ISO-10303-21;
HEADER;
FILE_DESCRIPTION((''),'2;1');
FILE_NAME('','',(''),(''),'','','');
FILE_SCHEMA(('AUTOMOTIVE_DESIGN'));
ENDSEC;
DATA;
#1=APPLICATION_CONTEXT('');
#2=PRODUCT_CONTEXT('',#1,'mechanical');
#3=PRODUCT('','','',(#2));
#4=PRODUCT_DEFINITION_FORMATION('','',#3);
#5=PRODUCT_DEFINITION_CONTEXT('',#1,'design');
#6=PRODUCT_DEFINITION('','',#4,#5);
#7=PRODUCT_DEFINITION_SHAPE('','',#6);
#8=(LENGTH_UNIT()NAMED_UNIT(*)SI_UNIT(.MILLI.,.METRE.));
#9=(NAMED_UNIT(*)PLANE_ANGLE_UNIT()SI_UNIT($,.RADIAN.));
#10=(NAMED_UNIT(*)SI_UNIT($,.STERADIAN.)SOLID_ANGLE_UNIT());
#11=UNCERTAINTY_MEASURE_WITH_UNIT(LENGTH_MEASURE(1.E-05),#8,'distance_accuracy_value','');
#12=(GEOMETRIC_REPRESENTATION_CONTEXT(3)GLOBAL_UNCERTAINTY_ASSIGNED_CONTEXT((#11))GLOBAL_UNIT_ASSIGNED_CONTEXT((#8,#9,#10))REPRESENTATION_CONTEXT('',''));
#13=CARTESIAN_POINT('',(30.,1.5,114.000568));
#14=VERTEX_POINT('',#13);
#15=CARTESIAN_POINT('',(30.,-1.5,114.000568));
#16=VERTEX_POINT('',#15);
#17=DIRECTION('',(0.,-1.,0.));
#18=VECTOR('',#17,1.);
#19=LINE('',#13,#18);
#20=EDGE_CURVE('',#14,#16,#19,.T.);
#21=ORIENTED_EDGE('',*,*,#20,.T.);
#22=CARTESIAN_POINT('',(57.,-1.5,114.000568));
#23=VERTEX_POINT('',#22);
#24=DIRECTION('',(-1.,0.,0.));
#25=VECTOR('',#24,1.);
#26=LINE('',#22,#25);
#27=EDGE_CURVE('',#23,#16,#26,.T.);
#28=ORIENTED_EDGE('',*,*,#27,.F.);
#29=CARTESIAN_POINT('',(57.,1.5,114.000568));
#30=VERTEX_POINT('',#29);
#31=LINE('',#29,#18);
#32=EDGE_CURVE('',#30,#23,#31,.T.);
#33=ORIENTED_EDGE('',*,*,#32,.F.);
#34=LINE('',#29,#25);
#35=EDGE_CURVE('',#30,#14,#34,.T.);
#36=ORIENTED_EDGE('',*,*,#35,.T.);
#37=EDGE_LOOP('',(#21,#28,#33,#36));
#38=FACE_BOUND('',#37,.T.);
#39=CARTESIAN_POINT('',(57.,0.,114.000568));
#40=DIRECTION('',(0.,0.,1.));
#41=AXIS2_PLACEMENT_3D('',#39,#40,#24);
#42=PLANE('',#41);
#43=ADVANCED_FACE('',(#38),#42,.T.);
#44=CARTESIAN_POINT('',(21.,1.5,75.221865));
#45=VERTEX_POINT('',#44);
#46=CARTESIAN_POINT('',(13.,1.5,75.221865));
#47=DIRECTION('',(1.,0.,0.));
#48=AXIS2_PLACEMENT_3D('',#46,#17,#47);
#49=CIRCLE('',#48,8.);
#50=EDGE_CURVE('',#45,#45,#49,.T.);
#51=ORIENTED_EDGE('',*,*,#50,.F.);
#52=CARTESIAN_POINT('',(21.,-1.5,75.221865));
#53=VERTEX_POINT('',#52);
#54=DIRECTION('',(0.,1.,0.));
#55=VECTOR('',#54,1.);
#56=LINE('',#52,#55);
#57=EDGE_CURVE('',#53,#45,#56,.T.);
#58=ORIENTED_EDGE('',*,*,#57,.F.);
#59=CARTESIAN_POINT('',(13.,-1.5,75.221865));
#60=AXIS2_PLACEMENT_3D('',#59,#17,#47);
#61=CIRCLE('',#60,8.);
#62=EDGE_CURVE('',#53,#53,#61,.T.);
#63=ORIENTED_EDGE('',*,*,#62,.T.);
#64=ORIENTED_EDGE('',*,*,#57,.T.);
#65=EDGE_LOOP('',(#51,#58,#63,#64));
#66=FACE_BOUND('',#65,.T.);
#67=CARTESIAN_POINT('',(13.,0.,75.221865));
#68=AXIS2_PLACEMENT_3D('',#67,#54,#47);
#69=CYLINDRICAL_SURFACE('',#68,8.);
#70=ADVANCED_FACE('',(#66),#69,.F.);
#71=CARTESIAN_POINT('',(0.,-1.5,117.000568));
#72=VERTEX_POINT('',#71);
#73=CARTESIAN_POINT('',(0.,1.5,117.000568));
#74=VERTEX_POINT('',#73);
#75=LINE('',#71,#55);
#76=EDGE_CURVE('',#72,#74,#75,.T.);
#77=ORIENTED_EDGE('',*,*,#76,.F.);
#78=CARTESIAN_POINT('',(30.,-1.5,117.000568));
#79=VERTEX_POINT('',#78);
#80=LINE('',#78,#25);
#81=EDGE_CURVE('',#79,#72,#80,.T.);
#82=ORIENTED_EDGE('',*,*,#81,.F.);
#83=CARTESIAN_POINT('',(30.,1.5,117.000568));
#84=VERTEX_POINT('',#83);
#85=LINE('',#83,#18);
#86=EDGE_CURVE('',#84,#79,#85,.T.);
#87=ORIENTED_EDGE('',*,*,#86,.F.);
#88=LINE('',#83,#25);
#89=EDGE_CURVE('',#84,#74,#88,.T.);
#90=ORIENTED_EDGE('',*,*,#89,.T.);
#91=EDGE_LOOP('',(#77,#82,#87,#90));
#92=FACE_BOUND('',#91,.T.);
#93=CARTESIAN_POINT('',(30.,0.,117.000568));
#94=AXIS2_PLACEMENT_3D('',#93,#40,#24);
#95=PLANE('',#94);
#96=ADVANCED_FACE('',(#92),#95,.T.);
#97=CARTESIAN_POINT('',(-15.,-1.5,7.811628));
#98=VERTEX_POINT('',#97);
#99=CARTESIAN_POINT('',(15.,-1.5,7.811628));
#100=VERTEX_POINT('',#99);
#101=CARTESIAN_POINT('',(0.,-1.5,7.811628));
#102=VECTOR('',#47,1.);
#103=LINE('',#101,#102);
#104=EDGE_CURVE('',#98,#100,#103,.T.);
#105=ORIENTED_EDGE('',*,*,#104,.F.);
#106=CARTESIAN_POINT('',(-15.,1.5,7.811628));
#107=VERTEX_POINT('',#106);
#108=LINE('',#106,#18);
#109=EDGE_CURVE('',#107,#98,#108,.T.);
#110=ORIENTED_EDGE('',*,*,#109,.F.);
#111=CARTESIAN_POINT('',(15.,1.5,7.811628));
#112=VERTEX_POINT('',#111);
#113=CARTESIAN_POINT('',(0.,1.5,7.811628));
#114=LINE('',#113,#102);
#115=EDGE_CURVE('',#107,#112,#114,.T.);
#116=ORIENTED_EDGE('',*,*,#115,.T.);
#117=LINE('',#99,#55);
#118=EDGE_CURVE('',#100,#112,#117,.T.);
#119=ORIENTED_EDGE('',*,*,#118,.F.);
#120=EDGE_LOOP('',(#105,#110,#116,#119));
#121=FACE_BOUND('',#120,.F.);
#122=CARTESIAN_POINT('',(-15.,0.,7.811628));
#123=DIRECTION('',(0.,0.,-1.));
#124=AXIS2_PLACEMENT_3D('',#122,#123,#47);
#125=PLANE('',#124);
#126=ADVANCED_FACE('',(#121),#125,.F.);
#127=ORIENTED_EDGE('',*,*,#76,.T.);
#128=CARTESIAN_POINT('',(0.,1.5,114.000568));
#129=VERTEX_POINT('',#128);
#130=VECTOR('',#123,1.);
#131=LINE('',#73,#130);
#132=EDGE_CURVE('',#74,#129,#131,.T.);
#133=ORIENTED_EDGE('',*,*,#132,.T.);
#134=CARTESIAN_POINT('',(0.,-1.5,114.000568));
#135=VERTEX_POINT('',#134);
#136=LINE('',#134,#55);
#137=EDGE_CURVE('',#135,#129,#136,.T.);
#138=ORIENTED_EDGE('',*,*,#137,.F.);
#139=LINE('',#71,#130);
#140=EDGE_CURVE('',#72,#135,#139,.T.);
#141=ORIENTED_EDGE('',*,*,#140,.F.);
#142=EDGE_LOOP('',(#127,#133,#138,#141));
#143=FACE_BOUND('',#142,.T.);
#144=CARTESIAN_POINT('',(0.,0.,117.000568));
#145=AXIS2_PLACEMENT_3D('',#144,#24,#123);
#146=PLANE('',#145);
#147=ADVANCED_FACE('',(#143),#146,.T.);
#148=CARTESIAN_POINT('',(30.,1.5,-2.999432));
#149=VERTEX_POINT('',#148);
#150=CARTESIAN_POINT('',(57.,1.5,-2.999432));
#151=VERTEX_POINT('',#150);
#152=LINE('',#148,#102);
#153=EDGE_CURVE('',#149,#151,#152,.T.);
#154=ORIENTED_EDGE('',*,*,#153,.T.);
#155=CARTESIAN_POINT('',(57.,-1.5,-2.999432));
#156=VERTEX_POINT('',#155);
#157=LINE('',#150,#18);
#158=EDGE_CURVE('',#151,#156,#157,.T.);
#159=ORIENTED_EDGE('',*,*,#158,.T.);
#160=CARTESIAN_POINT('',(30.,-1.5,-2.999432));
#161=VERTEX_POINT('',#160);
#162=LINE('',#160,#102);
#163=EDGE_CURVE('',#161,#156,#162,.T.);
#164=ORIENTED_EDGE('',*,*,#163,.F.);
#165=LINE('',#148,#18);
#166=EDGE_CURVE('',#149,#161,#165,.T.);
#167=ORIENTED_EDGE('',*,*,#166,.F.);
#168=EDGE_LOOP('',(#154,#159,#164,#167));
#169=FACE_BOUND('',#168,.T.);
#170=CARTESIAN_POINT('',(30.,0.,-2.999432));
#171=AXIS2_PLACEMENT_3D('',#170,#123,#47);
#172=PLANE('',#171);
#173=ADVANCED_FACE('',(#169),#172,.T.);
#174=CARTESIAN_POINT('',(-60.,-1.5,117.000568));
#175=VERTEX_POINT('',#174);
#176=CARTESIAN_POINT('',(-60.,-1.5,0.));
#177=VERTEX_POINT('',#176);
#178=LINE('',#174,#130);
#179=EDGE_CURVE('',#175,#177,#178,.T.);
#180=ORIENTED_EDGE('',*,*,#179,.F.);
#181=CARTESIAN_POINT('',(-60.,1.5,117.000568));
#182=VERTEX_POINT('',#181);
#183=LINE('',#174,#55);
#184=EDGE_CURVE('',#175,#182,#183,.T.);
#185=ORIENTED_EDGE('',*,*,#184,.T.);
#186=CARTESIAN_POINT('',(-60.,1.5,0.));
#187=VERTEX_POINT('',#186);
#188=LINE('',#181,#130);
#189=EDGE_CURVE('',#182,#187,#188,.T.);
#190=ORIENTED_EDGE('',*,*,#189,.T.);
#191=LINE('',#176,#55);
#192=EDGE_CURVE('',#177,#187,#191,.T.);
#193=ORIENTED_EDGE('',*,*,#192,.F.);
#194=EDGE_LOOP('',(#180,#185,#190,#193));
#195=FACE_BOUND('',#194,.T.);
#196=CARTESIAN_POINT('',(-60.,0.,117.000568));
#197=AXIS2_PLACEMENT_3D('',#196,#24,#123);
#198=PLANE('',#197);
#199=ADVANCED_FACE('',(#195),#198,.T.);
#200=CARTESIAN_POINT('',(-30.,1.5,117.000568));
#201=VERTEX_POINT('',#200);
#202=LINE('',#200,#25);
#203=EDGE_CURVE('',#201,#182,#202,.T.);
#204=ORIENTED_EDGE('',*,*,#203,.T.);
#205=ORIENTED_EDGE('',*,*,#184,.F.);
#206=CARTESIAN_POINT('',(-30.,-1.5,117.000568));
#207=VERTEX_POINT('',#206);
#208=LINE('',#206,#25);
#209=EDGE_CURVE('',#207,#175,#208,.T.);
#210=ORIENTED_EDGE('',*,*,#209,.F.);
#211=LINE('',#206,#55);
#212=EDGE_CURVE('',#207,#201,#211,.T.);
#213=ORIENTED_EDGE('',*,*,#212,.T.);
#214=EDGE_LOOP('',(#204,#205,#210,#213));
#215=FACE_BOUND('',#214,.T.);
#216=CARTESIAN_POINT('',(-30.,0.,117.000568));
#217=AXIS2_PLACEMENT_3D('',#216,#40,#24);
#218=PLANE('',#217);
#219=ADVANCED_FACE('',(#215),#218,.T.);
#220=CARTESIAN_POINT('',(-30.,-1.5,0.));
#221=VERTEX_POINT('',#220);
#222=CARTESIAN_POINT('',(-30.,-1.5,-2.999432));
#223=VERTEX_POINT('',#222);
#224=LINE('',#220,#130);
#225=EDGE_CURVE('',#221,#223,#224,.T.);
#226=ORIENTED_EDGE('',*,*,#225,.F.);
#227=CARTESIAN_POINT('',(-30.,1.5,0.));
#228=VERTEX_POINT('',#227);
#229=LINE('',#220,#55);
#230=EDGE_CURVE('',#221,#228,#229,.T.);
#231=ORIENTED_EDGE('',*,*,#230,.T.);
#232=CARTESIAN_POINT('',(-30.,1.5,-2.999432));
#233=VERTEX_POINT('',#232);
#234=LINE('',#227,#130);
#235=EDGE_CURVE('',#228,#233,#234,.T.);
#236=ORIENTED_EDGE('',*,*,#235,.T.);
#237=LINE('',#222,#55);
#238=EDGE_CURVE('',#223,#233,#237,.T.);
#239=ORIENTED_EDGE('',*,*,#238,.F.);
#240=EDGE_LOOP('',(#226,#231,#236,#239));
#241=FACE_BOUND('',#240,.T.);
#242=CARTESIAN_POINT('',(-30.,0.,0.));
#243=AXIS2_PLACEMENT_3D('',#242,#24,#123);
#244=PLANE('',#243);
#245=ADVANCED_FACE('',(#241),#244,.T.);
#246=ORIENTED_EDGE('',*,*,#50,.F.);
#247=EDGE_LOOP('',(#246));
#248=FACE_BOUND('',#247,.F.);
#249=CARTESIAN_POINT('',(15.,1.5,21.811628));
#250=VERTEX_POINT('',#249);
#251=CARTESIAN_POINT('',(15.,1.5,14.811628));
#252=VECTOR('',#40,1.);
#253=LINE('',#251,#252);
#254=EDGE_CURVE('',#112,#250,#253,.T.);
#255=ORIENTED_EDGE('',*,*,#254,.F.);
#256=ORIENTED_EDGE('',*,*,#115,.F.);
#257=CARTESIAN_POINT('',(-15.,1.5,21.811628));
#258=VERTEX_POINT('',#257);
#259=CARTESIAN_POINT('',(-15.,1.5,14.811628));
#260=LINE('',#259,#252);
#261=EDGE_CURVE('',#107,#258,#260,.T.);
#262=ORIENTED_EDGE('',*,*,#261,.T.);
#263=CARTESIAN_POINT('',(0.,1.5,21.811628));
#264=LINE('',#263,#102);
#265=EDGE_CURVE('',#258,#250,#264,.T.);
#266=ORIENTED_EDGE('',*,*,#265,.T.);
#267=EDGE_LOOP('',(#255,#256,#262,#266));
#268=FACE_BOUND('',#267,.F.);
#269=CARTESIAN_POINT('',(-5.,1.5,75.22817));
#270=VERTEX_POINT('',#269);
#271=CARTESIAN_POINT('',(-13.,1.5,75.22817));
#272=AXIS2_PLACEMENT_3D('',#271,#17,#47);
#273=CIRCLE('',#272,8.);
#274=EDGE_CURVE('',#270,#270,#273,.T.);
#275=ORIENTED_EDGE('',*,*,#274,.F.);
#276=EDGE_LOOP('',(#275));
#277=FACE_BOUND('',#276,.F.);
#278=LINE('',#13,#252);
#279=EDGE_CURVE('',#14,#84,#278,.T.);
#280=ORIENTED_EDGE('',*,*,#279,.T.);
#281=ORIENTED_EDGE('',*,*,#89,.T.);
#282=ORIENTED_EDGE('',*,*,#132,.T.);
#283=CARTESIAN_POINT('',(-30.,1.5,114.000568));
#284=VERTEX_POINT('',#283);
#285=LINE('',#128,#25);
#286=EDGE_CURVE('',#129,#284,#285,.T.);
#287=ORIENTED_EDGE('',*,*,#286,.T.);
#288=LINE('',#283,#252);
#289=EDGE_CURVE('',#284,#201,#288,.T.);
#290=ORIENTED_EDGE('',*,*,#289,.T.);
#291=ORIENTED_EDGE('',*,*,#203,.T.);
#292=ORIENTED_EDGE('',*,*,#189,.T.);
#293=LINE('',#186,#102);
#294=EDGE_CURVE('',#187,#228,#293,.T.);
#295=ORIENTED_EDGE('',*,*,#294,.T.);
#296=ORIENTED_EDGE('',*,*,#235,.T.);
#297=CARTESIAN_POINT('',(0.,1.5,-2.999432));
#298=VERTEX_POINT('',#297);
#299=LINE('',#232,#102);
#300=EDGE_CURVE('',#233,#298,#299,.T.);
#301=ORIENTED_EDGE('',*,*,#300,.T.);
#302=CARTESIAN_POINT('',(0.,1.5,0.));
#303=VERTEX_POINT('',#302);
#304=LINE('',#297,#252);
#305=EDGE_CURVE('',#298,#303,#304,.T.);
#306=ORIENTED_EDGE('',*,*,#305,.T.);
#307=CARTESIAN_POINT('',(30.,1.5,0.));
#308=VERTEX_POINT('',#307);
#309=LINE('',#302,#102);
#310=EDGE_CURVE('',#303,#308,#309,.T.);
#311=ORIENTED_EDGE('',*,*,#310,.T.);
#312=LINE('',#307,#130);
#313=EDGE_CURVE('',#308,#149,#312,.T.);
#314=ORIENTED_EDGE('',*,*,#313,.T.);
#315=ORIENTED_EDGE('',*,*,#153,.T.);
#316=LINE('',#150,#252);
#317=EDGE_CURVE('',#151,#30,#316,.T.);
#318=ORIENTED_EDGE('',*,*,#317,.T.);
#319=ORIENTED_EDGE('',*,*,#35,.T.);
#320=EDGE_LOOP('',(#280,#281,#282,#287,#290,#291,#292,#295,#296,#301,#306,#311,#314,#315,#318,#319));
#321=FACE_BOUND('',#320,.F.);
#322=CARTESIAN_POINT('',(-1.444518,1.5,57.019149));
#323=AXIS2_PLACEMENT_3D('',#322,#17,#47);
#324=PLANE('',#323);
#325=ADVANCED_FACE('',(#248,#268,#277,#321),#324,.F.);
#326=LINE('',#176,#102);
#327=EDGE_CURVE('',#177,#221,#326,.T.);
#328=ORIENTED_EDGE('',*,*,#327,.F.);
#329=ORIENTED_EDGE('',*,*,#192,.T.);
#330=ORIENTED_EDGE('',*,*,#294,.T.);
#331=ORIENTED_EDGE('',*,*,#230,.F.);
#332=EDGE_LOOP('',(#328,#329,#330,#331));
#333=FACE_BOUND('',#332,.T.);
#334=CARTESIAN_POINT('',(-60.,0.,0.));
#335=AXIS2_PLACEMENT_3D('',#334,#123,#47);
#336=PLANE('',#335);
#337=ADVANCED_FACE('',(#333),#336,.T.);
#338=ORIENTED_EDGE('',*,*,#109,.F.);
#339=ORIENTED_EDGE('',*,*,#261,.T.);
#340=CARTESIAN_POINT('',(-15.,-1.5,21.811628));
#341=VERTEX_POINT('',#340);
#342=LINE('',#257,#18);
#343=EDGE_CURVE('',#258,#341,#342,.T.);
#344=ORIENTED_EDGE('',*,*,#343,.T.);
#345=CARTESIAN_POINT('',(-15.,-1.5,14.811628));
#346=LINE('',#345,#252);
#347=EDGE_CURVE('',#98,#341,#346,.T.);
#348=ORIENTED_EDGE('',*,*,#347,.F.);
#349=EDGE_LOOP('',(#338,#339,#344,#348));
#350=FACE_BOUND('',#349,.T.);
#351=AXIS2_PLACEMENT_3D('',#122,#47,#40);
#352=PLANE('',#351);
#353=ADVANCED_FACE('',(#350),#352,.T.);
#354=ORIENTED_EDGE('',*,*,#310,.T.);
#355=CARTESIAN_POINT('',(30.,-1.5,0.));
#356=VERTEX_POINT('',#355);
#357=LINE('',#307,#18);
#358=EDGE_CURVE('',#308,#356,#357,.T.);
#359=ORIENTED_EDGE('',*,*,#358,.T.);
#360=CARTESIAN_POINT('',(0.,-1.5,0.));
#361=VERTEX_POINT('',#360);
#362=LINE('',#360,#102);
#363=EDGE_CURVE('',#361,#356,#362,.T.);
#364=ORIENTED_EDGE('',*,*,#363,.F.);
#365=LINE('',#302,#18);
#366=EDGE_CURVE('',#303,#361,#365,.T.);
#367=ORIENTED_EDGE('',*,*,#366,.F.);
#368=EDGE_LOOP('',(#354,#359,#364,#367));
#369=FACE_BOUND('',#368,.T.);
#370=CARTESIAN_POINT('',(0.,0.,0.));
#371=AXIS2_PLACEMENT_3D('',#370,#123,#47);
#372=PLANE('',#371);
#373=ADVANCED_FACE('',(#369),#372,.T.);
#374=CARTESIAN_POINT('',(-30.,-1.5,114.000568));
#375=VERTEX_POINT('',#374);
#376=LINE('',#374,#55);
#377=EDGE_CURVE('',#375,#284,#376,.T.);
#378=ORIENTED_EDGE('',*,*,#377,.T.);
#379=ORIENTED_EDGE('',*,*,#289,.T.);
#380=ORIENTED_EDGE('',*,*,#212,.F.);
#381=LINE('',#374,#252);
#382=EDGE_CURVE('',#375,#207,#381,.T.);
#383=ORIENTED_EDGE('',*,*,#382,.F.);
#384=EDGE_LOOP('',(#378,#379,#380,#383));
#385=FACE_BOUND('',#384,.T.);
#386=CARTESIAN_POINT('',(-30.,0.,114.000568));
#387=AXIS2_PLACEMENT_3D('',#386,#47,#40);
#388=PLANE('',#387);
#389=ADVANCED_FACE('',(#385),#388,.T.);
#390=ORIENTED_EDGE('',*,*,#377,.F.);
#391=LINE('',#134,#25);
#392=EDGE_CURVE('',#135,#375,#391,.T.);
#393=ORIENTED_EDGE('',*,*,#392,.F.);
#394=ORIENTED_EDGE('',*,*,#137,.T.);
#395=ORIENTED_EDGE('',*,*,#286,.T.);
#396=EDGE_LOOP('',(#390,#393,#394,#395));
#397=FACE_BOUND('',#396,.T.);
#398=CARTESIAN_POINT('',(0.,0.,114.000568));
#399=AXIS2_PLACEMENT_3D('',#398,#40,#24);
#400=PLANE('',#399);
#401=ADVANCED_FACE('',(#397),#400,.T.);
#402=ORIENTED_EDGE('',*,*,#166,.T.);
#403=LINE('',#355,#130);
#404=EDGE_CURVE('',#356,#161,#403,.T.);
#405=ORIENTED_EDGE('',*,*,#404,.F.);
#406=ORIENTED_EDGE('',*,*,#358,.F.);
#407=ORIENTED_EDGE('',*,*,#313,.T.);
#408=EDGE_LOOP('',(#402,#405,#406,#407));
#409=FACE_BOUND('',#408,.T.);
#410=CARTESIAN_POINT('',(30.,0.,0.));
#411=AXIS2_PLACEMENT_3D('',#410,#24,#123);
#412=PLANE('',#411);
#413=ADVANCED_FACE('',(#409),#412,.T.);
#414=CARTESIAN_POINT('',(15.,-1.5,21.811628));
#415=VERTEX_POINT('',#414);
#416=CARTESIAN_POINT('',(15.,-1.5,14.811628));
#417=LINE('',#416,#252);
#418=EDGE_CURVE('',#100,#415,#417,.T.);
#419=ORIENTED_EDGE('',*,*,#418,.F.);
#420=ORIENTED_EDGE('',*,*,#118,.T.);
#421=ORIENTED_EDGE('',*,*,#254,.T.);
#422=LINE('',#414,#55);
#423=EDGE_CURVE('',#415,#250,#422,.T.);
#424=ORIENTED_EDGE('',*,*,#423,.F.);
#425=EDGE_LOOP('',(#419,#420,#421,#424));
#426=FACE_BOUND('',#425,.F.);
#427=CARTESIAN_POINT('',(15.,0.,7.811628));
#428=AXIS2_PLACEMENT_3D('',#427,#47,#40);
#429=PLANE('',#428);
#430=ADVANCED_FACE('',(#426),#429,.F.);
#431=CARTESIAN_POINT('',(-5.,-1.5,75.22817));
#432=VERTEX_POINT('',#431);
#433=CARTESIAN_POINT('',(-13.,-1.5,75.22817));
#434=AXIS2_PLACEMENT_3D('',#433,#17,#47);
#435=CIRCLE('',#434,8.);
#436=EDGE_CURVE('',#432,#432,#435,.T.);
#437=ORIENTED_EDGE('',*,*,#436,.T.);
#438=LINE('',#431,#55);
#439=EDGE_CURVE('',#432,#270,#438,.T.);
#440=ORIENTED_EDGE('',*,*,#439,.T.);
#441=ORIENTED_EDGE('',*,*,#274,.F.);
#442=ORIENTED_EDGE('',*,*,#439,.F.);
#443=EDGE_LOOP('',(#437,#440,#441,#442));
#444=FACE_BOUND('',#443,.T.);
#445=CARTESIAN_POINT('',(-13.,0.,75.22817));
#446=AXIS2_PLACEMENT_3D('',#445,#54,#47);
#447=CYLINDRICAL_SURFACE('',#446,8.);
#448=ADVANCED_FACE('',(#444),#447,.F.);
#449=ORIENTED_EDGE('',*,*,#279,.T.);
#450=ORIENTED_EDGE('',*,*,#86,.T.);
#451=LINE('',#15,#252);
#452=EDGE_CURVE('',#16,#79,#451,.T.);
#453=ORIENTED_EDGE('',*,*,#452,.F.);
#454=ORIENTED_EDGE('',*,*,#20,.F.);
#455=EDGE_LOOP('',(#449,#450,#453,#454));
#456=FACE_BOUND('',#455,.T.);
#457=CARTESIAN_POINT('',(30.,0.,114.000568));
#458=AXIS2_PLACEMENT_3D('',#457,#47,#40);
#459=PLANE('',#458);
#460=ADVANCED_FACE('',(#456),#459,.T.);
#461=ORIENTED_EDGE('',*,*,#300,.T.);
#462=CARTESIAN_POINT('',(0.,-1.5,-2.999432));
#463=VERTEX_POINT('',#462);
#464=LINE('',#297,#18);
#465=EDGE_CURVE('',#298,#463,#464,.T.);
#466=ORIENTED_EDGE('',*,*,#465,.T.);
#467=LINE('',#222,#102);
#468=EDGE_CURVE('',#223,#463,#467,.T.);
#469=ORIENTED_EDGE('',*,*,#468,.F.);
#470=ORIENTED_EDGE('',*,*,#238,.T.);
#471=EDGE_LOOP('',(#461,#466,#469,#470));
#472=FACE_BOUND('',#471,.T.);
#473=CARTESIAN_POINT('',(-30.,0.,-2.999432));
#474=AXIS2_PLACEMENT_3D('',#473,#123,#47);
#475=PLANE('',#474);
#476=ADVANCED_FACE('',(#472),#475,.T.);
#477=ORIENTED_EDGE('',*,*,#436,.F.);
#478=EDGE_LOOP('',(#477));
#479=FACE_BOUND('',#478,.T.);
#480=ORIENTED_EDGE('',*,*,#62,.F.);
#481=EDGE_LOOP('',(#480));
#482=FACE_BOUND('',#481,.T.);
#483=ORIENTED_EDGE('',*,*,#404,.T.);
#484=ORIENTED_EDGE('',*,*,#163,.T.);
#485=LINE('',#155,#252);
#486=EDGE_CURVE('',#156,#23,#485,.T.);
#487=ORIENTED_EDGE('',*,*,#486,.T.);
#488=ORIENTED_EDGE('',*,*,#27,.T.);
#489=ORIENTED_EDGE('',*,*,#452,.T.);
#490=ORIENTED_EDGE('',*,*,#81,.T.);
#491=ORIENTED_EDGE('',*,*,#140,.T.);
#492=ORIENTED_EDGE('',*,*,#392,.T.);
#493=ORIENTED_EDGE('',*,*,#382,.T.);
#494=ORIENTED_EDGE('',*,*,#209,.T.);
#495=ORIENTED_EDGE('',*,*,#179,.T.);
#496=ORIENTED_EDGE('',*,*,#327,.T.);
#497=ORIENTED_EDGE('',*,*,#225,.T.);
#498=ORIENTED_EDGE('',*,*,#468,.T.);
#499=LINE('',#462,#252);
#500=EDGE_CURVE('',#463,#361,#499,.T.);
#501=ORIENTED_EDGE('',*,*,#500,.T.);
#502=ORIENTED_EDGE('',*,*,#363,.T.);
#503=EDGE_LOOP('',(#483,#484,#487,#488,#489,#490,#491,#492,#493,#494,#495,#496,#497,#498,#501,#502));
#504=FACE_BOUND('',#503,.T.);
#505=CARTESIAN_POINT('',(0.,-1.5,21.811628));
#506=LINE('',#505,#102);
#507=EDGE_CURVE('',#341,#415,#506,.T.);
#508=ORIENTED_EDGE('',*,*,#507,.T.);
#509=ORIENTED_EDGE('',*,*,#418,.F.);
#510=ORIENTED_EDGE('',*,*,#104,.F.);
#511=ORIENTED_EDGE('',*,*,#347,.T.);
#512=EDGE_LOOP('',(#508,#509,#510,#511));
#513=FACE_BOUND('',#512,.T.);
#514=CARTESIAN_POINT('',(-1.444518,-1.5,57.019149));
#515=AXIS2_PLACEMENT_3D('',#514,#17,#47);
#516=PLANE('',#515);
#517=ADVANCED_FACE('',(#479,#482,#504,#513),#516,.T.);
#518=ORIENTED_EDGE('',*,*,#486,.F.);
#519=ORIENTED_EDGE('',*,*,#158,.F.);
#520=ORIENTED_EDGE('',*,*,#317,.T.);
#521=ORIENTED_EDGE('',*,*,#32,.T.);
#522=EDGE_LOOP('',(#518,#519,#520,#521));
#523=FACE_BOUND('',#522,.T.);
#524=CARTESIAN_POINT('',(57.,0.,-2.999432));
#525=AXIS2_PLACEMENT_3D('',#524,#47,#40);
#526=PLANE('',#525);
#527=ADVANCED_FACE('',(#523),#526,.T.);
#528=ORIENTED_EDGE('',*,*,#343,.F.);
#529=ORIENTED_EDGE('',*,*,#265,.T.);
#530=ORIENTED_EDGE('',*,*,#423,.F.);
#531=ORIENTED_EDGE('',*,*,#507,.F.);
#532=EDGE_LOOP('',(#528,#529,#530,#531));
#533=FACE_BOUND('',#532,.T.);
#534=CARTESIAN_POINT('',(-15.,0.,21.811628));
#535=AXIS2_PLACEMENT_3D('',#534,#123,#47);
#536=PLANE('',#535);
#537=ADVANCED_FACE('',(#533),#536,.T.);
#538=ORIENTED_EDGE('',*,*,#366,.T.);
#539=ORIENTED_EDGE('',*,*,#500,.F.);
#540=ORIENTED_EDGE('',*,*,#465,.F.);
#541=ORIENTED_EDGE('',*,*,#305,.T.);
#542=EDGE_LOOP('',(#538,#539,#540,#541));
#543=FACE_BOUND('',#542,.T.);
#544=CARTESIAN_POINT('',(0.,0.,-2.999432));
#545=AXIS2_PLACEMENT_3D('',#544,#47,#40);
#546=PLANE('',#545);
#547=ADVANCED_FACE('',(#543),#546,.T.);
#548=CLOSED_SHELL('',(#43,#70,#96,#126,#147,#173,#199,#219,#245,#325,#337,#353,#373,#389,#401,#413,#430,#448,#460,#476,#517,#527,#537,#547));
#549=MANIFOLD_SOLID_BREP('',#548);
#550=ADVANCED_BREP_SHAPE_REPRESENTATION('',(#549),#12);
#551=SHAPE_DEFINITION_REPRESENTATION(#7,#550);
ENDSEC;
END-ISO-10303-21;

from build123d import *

# Parameters (mm, degrees)
F0_W     = 30
F0_H     = 14
F0_R     = 8
F1_DEPTH = 1.5


# Not quite as in the source:
# - a feature names something its author has since deleted; it is built from what else it names


with BuildPart() as f1:
    # F0 (on Front) → F1 (new body, symmetric)
    with BuildSketch(Plane.XZ):
        Polygon((-30, -2.9994321861), (0, -2.9994321861), (0, 0), (30, 0), (30, -2.9994321861), (57, -2.9994321861), (57, 114.0005678139), (30, 114.0005678139), (30, 117.0005678139), (0, 117.0005678139), (0, 114.0005678139), (-30, 114.0005678139), (-30, 117.0005678139), (-60, 117.0005678139), (-60, 0), (-30, 0), align=None)
        with Locations((0, 14.8116284981)):
            Rectangle(F0_W, F0_H, mode=Mode.SUBTRACT)
        with Locations((-13, 75.2281695604)):
            Circle(F0_R, mode=Mode.SUBTRACT)
        with Locations((13, 75.2218647463)):
            Circle(F0_R, mode=Mode.SUBTRACT)
    extrude(amount=F1_DEPTH, both=True)


solid = f1.part
